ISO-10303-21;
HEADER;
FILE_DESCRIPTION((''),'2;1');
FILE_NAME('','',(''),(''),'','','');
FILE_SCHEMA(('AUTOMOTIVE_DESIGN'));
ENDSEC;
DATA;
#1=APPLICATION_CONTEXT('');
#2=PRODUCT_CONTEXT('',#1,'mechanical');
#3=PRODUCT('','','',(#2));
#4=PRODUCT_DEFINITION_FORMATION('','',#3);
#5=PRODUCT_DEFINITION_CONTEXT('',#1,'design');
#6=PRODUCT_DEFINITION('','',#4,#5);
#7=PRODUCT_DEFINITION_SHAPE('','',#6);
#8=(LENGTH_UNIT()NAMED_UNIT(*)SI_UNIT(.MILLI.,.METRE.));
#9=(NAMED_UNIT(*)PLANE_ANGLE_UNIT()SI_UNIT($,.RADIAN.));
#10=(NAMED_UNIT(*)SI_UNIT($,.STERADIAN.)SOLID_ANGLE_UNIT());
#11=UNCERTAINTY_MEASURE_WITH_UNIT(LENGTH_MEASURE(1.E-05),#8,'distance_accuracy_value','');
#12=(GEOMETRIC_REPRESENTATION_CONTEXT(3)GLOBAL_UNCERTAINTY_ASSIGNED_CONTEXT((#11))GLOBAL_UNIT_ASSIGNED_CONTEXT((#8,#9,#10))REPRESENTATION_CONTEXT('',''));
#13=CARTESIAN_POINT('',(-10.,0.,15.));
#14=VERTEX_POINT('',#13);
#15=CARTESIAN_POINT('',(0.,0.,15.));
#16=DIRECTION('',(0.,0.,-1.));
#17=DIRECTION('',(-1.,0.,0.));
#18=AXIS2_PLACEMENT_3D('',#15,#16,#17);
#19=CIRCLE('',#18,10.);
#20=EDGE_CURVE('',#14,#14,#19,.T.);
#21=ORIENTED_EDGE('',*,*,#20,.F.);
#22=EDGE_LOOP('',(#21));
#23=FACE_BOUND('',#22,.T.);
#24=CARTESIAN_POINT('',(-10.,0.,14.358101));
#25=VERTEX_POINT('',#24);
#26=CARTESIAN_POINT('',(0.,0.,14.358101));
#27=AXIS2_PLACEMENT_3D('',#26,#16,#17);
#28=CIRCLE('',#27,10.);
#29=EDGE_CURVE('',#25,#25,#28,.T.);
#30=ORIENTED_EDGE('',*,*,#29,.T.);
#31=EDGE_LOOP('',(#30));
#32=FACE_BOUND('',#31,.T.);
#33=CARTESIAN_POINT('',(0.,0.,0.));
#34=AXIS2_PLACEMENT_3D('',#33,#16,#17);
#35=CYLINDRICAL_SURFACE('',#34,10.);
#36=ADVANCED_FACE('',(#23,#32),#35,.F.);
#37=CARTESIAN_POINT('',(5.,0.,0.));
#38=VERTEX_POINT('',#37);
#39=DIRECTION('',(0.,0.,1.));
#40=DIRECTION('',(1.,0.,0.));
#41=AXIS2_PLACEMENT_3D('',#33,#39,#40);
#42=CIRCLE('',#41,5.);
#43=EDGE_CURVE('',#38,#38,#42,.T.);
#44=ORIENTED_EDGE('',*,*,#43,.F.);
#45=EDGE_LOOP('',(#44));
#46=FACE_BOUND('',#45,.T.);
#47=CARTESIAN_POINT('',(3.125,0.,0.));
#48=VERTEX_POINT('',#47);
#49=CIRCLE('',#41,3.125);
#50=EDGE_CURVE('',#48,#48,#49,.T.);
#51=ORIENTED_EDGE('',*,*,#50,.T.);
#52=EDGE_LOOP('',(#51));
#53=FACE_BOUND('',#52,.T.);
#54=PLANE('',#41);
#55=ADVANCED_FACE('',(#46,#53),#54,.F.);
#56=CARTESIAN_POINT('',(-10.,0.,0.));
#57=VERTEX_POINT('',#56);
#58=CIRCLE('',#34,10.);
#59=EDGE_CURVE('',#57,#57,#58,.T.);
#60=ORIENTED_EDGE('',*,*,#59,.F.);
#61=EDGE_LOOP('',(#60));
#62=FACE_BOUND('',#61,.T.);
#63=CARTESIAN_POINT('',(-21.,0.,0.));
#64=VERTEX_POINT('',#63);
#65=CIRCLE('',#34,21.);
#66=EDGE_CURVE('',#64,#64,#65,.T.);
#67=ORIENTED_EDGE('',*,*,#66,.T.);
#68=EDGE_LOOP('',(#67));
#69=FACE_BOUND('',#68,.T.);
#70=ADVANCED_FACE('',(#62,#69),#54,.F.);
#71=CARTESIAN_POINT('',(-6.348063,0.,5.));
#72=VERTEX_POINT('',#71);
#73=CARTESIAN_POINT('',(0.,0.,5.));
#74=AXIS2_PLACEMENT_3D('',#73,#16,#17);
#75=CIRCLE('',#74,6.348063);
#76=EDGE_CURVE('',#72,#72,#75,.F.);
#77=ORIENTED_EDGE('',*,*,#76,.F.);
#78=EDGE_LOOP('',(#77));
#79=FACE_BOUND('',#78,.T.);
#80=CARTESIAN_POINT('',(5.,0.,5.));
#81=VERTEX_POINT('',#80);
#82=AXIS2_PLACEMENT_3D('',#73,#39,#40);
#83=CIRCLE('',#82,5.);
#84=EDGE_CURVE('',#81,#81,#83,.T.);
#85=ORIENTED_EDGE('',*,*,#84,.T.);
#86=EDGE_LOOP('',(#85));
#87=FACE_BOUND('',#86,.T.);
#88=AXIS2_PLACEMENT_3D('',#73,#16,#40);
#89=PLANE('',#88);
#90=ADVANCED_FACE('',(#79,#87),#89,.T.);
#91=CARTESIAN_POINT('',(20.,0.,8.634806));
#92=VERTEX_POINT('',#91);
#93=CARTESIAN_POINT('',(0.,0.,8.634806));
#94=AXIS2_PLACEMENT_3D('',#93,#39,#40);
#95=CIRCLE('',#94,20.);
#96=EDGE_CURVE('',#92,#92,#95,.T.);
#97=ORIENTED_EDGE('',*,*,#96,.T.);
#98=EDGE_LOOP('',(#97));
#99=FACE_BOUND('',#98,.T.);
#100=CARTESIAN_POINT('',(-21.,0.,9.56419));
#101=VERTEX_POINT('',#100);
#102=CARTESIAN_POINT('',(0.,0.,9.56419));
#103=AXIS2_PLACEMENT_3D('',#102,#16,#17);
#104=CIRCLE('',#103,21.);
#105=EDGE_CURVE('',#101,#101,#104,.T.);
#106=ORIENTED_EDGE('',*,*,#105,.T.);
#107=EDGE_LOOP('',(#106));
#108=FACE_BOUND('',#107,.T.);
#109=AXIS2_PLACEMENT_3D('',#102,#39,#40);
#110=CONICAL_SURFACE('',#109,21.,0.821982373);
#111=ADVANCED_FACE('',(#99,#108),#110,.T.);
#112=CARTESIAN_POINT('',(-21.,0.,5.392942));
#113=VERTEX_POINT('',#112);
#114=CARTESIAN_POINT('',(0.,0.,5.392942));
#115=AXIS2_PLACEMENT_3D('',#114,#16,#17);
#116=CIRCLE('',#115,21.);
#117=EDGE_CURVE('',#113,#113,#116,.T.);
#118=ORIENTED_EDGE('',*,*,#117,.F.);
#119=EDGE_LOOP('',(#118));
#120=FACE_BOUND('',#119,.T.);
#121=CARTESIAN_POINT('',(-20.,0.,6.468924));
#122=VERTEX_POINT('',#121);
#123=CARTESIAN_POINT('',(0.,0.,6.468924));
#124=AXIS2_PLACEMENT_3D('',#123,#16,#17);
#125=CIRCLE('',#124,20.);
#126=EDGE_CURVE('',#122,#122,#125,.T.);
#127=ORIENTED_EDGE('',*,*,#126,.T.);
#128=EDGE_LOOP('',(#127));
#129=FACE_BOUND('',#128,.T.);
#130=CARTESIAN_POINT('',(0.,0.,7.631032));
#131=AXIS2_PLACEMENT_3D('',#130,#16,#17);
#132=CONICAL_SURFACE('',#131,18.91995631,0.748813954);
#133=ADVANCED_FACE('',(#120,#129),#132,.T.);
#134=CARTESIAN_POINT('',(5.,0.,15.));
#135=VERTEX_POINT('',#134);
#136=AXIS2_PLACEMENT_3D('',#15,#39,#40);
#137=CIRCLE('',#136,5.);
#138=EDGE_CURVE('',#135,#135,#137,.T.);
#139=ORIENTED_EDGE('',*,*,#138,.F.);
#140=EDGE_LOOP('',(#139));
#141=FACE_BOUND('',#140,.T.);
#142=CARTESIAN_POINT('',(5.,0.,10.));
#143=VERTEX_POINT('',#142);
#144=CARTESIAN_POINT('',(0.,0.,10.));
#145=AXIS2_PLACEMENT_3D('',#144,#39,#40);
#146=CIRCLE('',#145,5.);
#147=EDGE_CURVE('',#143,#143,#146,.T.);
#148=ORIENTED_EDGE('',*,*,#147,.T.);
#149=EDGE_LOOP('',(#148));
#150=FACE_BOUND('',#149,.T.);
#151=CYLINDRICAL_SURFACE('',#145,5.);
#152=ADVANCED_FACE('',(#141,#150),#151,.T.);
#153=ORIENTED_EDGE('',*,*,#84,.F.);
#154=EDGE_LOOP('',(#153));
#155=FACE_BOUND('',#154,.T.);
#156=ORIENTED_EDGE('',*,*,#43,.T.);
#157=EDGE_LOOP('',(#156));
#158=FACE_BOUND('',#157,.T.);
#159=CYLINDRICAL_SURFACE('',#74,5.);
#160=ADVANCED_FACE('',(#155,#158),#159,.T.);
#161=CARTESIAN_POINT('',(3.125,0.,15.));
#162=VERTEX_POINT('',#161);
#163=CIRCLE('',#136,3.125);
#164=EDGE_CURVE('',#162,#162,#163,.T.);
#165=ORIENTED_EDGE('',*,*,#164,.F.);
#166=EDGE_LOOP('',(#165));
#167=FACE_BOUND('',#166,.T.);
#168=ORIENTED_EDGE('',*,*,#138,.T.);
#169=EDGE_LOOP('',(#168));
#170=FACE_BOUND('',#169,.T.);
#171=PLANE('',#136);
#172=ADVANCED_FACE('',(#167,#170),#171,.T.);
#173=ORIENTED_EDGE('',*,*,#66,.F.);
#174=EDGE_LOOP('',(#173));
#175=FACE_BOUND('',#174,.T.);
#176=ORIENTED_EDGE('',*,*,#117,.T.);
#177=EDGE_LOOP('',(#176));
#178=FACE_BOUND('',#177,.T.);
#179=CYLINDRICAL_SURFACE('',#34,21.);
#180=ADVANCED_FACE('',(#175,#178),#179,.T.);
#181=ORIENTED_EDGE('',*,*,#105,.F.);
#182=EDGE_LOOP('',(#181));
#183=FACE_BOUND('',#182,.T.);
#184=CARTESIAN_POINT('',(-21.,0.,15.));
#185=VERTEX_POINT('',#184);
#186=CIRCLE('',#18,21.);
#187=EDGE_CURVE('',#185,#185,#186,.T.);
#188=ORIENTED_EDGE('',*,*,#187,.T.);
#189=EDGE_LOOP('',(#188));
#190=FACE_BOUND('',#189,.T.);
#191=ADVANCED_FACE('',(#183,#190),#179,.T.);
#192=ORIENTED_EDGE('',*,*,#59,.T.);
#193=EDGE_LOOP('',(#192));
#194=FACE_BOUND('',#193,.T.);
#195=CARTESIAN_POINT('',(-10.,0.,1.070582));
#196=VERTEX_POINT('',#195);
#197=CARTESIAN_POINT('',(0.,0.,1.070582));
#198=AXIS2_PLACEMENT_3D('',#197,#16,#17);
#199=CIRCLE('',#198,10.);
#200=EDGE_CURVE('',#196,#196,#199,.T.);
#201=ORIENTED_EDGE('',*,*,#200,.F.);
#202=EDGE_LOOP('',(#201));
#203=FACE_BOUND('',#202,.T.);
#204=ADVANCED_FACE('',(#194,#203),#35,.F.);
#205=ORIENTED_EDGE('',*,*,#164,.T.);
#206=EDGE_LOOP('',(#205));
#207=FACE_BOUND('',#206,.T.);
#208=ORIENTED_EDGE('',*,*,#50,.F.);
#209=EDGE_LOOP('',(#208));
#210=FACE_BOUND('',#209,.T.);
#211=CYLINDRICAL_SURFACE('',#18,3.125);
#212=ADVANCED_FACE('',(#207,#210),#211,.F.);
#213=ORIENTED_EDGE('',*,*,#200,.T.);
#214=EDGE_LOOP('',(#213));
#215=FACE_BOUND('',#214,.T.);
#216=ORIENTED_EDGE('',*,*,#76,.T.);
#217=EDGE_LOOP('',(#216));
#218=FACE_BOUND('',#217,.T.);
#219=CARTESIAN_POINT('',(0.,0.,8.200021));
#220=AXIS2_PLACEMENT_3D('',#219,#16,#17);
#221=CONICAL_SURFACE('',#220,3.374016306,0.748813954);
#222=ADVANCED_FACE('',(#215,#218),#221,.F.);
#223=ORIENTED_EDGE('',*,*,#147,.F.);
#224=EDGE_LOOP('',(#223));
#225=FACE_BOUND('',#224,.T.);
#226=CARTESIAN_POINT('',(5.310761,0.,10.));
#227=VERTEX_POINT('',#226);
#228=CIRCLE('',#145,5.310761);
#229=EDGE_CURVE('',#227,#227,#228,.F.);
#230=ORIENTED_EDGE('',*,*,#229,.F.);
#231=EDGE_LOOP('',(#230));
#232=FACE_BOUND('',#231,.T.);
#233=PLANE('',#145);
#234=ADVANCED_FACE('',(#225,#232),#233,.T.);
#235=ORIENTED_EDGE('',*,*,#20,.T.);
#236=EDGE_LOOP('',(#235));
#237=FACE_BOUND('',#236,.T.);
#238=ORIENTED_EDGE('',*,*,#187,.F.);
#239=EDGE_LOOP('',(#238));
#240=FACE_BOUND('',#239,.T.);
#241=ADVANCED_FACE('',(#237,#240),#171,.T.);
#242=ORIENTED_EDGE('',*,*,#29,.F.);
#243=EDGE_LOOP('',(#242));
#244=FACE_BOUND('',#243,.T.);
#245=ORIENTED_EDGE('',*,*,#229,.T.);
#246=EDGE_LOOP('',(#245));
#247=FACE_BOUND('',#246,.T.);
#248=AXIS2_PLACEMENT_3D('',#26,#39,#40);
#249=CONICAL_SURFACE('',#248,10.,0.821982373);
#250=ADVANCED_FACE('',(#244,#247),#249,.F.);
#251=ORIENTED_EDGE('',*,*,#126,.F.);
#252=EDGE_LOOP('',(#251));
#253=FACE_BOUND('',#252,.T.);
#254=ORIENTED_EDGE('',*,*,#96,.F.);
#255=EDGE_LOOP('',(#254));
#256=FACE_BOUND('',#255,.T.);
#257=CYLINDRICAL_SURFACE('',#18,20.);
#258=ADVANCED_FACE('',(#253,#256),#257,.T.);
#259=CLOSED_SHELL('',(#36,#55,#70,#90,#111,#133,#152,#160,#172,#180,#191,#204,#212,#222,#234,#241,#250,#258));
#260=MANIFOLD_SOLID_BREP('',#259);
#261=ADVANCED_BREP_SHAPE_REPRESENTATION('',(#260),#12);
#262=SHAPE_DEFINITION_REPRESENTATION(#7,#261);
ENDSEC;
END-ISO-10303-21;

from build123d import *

# Parameters (mm, degrees)
SKETCH1_R           = 20
SKETCH1_R_2         = 3.125
BOSS_EXTRUDE1_DEPTH = 15
SKETCH2_R           = 16.5
SKETCH2_R_2         = 5
CUT_EXTRUDE1_DEPTH  = 5


# Read off the part's stored shape, not the designer's step: Revolve-Thin19
with BuildPart() as part:
    # Sketch1 → Boss-Extrude1 (new body)
    with BuildSketch(Plane.XY):
        Circle(SKETCH1_R)
        Circle(SKETCH1_R_2, mode=Mode.SUBTRACT)
    extrude(amount=BOSS_EXTRUDE1_DEPTH)

    # Sketch2 → Cut-Extrude1 (cut)
    with BuildSketch(Plane.XY.offset(15)):
        Circle(SKETCH2_R)
        Circle(SKETCH2_R_2, mode=Mode.SUBTRACT)
    cut_extrude1 = extrude(amount=-CUT_EXTRUDE1_DEPTH, mode=Mode.SUBTRACT)

    # Mirror1: Cut-Extrude1 across plane
    add(cut_extrude1.mirror(Plane.XY.offset(7.5)), mode=Mode.SUBTRACT)

    # Revolve-Thin19 outline → Revolve-Thin19 (revolve)
    with BuildSketch(Plane.XZ):
        Polygon((10, 1.070581714), (10, 0), (16.5, 0), (16.5, 5), (6.348063393, 5), align=None)
        Polygon((20, 0), (21, 0), (21, 5.392941829), (20, 6.468923892), align=None)
        Polygon((20, 8.634806339), (21, 9.564189861), (21, 15), (20, 15), align=None)
        Polygon((16.5, 10), (16.5, 15), (10, 15), (10, 14.358101386), (5.310761078, 10), align=None)
    revolve(axis=Axis((0, 0, 0), (0, 0, 1)))


solid = part.part
